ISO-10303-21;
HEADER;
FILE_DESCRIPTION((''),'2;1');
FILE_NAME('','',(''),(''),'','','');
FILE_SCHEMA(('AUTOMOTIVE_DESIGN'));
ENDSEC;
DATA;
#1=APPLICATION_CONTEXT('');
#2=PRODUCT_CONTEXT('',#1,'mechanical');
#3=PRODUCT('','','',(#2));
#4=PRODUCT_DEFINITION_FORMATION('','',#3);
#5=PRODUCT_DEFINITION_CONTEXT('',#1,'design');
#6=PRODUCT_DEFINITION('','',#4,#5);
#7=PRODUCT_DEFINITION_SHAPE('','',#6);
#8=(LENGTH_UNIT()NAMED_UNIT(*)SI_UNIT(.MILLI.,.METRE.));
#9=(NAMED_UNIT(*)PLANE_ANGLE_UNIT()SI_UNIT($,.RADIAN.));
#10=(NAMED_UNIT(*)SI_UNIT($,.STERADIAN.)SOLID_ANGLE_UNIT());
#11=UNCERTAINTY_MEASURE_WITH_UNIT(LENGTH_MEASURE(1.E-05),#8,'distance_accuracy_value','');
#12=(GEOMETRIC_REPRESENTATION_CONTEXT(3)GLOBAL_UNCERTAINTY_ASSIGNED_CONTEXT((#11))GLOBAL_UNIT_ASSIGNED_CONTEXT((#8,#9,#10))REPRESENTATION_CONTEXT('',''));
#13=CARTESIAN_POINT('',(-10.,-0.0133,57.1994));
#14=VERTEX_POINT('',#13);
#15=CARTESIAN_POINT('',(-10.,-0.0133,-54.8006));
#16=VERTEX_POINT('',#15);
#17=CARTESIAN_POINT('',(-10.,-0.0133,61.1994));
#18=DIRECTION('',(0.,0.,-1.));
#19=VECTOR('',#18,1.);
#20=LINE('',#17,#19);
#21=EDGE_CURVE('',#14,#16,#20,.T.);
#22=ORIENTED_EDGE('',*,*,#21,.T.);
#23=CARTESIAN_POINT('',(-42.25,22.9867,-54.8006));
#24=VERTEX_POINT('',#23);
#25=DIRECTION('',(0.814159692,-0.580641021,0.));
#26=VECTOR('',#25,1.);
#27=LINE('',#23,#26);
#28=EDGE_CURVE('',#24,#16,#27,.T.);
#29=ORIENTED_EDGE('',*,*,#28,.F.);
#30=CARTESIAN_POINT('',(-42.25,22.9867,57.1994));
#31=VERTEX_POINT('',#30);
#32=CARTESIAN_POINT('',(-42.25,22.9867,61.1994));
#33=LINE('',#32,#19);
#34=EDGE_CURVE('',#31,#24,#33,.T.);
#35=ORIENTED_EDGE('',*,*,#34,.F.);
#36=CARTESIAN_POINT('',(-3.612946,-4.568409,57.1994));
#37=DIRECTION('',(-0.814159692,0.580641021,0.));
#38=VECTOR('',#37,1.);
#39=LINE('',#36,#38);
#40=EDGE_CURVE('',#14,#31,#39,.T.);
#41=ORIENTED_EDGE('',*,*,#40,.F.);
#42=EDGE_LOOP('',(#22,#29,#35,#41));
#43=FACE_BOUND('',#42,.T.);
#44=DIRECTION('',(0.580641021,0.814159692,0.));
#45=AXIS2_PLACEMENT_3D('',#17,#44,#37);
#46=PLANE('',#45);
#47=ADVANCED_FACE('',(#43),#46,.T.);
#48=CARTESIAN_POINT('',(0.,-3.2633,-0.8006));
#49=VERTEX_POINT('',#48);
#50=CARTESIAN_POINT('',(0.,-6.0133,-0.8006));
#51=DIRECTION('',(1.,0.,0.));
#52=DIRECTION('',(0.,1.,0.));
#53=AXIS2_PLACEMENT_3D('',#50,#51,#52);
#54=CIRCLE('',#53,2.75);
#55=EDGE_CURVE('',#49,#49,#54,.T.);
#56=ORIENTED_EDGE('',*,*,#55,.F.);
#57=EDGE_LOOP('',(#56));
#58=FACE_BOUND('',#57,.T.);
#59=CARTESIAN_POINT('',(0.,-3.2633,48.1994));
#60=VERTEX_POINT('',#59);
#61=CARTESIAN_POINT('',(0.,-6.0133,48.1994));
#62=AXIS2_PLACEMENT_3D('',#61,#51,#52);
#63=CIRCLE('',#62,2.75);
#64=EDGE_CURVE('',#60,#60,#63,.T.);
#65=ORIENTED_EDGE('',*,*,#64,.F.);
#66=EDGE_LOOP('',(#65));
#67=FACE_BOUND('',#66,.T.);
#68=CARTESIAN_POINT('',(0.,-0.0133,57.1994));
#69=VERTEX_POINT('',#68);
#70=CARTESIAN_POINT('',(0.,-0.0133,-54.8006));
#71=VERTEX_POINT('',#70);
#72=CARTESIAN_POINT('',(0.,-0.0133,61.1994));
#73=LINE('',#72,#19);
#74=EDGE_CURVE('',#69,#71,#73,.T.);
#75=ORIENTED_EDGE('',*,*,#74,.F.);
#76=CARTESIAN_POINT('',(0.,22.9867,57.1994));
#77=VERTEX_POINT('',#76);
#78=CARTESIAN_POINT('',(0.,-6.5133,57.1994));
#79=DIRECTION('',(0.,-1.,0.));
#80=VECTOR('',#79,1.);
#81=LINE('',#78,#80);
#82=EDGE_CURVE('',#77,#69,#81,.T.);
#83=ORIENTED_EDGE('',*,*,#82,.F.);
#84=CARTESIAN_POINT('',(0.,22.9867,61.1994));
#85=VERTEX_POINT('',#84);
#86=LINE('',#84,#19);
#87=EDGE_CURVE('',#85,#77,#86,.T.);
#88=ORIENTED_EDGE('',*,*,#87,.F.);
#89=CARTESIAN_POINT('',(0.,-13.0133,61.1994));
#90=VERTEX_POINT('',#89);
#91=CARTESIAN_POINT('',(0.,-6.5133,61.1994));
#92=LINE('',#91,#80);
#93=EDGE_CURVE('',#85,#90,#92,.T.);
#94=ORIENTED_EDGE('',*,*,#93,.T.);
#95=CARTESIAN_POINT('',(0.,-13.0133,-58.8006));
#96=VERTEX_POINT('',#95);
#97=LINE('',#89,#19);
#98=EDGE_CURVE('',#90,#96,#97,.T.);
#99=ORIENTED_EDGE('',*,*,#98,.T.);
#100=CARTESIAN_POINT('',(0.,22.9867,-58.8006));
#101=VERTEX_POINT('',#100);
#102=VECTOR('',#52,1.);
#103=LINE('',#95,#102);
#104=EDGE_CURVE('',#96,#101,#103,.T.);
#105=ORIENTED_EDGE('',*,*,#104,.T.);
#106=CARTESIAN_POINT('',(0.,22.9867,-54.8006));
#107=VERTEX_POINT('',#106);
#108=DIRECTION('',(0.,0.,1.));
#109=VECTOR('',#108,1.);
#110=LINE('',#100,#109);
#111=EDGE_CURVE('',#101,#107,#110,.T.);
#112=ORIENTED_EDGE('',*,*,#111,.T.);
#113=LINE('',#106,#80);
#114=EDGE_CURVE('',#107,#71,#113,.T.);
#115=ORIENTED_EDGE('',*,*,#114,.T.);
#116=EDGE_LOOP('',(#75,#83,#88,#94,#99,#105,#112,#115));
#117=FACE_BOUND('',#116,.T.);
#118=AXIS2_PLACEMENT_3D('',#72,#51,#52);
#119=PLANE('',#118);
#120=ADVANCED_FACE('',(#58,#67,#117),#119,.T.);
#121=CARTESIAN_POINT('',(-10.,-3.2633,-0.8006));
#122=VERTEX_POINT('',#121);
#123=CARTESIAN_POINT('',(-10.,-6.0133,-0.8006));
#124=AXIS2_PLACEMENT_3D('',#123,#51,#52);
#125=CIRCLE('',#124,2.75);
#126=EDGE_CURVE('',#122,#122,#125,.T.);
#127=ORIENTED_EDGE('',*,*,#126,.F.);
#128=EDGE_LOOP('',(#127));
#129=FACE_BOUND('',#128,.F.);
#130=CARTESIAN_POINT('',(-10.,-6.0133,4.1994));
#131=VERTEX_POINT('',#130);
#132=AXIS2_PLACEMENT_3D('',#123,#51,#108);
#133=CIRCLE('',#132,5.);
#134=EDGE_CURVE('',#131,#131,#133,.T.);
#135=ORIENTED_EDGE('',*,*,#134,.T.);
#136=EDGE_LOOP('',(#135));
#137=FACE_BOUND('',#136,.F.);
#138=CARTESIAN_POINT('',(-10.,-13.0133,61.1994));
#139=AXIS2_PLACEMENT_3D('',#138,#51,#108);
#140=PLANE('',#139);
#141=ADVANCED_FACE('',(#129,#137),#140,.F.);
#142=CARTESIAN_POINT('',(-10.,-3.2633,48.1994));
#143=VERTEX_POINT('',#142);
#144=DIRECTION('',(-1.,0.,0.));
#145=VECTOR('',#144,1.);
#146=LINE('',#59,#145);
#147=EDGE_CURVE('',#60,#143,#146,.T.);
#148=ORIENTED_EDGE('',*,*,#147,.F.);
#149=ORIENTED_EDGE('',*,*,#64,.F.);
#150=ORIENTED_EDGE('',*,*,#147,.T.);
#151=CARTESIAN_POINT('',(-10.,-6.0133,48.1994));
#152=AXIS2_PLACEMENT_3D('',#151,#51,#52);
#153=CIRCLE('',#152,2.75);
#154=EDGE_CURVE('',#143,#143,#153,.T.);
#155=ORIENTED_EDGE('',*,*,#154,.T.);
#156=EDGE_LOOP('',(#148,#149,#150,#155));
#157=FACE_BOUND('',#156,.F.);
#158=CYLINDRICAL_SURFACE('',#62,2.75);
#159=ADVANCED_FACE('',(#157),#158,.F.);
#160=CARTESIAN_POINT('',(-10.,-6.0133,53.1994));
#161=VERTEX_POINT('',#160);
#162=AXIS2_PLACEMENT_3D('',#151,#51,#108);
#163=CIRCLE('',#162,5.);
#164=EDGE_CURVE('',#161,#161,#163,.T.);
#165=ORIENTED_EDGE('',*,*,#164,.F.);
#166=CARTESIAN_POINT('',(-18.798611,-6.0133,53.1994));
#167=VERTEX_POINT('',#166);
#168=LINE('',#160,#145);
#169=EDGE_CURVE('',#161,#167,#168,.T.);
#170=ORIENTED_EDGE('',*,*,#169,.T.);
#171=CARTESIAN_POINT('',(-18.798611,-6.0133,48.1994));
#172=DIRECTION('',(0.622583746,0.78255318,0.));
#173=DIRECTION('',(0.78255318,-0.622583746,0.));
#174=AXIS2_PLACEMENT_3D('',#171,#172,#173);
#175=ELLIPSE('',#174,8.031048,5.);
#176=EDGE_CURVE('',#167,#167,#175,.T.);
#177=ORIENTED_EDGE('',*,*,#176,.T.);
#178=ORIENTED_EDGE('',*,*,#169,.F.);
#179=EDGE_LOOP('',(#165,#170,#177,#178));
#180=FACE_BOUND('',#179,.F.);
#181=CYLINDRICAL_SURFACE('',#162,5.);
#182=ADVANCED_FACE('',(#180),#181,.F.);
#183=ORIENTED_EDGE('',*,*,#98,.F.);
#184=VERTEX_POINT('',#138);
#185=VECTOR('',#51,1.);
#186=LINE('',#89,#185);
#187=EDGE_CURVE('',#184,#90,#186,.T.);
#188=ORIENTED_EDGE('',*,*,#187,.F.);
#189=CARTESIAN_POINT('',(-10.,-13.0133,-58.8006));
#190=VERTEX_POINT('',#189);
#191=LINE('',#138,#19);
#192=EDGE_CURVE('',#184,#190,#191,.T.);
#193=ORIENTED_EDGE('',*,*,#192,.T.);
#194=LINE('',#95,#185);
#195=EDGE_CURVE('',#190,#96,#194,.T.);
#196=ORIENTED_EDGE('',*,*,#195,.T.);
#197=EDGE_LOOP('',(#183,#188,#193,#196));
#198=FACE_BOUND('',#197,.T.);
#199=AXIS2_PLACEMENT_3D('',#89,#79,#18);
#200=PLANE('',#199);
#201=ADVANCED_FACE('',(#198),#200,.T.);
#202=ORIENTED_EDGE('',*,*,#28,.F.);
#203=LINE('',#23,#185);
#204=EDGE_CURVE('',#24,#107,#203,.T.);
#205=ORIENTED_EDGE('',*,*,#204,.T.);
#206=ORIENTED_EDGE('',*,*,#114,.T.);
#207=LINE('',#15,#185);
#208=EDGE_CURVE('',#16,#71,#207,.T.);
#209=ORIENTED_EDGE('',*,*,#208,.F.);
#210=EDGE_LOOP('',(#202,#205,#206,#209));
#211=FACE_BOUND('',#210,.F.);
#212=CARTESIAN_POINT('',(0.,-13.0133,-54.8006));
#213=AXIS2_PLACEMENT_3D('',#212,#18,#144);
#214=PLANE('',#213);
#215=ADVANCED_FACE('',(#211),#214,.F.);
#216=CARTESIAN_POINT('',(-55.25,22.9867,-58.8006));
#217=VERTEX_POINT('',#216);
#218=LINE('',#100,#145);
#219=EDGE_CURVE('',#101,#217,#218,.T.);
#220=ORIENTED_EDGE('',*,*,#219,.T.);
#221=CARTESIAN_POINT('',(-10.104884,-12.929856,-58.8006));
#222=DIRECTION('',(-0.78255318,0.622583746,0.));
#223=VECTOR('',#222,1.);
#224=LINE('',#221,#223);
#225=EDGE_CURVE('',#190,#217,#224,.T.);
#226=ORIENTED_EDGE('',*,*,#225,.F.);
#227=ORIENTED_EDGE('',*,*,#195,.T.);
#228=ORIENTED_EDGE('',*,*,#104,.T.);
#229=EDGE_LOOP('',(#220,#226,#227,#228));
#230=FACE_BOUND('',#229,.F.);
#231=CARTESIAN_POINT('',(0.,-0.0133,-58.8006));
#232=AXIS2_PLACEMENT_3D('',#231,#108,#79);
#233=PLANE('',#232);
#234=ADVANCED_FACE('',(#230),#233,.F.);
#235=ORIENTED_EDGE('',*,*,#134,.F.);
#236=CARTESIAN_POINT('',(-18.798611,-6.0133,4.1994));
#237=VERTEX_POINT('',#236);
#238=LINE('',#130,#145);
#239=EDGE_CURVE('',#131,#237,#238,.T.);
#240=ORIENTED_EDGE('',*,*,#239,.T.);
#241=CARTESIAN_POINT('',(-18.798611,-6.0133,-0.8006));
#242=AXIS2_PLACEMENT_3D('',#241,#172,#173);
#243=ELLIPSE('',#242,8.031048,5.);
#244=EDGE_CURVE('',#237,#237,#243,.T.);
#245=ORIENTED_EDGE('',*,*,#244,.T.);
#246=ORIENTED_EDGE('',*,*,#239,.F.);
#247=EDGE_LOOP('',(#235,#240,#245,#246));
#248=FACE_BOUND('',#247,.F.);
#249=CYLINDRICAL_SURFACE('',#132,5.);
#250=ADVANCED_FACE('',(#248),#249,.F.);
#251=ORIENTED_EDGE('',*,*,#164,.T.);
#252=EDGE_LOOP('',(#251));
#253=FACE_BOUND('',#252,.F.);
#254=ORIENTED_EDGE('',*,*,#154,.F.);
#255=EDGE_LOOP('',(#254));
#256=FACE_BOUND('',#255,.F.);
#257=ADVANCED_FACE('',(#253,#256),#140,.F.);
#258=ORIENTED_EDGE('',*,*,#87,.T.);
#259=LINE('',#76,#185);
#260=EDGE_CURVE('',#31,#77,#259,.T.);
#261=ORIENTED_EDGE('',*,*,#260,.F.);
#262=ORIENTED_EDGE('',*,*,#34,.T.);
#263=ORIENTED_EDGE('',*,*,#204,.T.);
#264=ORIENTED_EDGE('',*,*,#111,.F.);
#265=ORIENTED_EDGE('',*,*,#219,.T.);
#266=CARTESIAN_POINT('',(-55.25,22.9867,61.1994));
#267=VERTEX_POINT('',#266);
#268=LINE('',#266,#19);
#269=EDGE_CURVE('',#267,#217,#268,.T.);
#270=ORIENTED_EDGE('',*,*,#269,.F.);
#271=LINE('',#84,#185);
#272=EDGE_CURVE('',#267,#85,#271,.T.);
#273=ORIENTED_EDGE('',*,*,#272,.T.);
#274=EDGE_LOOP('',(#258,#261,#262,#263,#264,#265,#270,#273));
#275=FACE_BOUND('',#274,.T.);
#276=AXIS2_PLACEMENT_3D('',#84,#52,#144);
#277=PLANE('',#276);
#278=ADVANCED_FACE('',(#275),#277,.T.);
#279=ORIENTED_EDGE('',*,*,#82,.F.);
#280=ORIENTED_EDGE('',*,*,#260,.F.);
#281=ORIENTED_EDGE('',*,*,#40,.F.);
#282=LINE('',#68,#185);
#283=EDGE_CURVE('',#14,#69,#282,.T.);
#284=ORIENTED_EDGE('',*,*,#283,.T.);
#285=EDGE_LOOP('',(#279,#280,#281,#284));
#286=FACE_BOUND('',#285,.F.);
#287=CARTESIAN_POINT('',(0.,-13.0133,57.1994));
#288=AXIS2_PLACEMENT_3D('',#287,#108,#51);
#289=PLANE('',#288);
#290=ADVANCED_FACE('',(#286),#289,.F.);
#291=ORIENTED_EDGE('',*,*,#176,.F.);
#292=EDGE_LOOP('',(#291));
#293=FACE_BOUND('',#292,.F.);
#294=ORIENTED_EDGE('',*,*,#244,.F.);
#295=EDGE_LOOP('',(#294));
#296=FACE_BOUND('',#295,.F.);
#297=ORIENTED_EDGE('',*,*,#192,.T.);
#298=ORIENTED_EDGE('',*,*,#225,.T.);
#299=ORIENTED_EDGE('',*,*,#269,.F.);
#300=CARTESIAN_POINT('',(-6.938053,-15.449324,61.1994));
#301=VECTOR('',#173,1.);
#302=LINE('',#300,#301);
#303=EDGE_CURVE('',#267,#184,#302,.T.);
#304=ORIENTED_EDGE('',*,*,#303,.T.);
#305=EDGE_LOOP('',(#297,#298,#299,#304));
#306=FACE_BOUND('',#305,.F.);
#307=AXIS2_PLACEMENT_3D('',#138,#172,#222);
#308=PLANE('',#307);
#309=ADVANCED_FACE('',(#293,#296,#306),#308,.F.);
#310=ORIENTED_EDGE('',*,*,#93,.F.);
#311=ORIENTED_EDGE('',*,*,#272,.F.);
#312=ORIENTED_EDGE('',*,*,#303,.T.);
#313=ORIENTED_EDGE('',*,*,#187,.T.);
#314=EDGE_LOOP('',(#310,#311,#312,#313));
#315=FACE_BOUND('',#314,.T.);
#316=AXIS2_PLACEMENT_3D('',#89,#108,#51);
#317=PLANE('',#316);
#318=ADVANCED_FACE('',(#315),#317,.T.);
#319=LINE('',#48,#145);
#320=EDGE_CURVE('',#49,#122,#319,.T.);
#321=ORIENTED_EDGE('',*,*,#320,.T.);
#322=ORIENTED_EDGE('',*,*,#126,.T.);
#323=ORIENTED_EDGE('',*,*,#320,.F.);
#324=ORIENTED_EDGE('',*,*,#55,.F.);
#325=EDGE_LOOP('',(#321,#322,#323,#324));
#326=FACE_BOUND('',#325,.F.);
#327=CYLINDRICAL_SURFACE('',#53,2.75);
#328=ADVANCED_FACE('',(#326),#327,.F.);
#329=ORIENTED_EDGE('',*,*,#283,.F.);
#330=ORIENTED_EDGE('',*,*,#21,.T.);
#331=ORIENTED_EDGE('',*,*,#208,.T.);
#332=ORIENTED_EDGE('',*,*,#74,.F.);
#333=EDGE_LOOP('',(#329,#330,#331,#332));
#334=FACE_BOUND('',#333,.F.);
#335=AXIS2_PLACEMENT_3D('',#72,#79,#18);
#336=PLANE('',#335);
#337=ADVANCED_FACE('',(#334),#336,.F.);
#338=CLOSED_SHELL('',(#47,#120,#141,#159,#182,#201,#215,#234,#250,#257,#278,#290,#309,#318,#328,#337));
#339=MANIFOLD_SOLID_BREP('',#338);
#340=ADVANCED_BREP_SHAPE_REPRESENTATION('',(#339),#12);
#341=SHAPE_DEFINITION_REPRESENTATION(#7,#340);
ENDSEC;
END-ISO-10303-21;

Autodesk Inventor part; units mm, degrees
ref_plane "YZ Plane" through (0, 0, 0) normal (1, 0, 0) x (0, 1, 0)
ref_plane "XZ Plane" through (0, 0, 0) normal (0, 1, 0) x (-1, 0, 0)
ref_plane "XY Plane" through (0, 0, 0) normal (0, 0, 1) x (1, 0, 0)
sketch "Эскиз1" plane through (0, 0, 0) normal (1, 0, 0) x (0, 1, 0)
  circle A0 centre (-6.0133, 48.1994) radius 2.75 projected
  circle A1 centre (-6.0133, -0.8006) radius 2.75 projected
  line L0 (-13.0133, 61.1994) -> (-13.0133, -18.8006) projected
  line L1 (38.9867, 61.1994) -> (-13.0133, 61.1994) projected
  line L2 (33.9867, -18.8006) -> (-13.0133, -18.8006) projected
  line L3 (-0.0133, 61.1994) -> (-0.0133, -18.8006)
  point P0 (0, 0)
  dimension "d0" = 13
extrude "Выдавливание1" add sketch "Эскиз1" against normal blind 10
sketch "Эскиз2" plane through (0, -13.0133, 61.1994) normal (0, 0, 1) x (1, 0, 0)
  line L0 (-55.25, 38) -> (-55.25, 36) projected
  line L1 (-10, 13) -> (-10, 0) projected
  line L2 (-10, 0) -> (-55.25, 36)
  line L3 (0, 13) -> (-10, 13) projected
  line L4 (-10, 13) -> (-42.25, 36)
  line L5 (-55.25, 36) -> (-42.25, 36)
  point P0 (0, 13.0133)
  dimension "d3" = 13
  dimension "d4" = 13
extrude "Выдавливание2" add sketch "Эскиз2" against normal up to surface (80 mm away)
sketch "Эскиз3" plane through (0, -13.0133, 61.1994) normal (0, 0, 1) x (1, 0, 0)
  line L0 (0, 13) -> (0, 0) projected
  line L1 (0, 13) -> (0, 36)
  line L2 (-10, 13) -> (-42.25, 36) projected
  line L3 (0, 36) -> (-42.25, 36)
  line L4 (0, 13) -> (-10, 13) projected
  point P0 (0, 13.0133)
extrude "Выдавливание3" add sketch "Эскиз3" against normal blind 4
sketch "Эскиз4" plane through (-10, -6.0133, 48.1994) normal (1, 0, 0) x (0, 0, -1)
  circle A0 centre (49, 0) radius 2.75 projected
  circle A1 centre (0, 0) radius 2.75 projected
  point P0 (48.1994, 6.0133)
extrude "Выдавливание4" cut sketch "Эскиз4" against normal through all
ref_plane "РабПлоскость1" through (-10, -13.0133, 61.1994) normal (1, 0, 0) x (0, 0, 1)
sketch "Эскиз5" plane through (-10, -13.0133, 61.1994) normal (1, 0, 0) x (0, 0, 1)
  circle A0 centre (-13, -7) radius 2.75 projected
  circle A1 centre (-62, -7) radius 2.75 projected
  circle A2 centre (-13, -7) radius 2.75 projected
  circle A3 centre (-13, -7) radius 5
  circle A4 centre (-62, -7) radius 5
  point P0 (-61.1994, -13.0133)
  dimension "d12" = 10
  dimension "d13" = 10
extrude "Выдавливание5" cut sketch "Эскиз5" against normal through all contours A0 | A1 | A3 | A4
move faces "Перенос2" translate (0, 0, -40) faces at (-35.8333, 10.9867, -18.8006)
sketch "Эскиз6" plane through (0, -13.0133, -58.8006) normal (0, 0, -1) x (-1, 0, 0)
  line L0 (42.25, 36) -> (10, 13) projected
  line L1 (42.25, 36) -> (0, 36) projected
  line L2 (0, 36) -> (0, 13) projected
  line L3 (10, 13) -> (0, 13) projected
  point P0 (0, 13.0133)
extrude "Выдавливание6" add sketch "Эскиз6" against normal blind 4
equation "\"d4\" = d3"
properties part number "000.001.007 - Накладка"
